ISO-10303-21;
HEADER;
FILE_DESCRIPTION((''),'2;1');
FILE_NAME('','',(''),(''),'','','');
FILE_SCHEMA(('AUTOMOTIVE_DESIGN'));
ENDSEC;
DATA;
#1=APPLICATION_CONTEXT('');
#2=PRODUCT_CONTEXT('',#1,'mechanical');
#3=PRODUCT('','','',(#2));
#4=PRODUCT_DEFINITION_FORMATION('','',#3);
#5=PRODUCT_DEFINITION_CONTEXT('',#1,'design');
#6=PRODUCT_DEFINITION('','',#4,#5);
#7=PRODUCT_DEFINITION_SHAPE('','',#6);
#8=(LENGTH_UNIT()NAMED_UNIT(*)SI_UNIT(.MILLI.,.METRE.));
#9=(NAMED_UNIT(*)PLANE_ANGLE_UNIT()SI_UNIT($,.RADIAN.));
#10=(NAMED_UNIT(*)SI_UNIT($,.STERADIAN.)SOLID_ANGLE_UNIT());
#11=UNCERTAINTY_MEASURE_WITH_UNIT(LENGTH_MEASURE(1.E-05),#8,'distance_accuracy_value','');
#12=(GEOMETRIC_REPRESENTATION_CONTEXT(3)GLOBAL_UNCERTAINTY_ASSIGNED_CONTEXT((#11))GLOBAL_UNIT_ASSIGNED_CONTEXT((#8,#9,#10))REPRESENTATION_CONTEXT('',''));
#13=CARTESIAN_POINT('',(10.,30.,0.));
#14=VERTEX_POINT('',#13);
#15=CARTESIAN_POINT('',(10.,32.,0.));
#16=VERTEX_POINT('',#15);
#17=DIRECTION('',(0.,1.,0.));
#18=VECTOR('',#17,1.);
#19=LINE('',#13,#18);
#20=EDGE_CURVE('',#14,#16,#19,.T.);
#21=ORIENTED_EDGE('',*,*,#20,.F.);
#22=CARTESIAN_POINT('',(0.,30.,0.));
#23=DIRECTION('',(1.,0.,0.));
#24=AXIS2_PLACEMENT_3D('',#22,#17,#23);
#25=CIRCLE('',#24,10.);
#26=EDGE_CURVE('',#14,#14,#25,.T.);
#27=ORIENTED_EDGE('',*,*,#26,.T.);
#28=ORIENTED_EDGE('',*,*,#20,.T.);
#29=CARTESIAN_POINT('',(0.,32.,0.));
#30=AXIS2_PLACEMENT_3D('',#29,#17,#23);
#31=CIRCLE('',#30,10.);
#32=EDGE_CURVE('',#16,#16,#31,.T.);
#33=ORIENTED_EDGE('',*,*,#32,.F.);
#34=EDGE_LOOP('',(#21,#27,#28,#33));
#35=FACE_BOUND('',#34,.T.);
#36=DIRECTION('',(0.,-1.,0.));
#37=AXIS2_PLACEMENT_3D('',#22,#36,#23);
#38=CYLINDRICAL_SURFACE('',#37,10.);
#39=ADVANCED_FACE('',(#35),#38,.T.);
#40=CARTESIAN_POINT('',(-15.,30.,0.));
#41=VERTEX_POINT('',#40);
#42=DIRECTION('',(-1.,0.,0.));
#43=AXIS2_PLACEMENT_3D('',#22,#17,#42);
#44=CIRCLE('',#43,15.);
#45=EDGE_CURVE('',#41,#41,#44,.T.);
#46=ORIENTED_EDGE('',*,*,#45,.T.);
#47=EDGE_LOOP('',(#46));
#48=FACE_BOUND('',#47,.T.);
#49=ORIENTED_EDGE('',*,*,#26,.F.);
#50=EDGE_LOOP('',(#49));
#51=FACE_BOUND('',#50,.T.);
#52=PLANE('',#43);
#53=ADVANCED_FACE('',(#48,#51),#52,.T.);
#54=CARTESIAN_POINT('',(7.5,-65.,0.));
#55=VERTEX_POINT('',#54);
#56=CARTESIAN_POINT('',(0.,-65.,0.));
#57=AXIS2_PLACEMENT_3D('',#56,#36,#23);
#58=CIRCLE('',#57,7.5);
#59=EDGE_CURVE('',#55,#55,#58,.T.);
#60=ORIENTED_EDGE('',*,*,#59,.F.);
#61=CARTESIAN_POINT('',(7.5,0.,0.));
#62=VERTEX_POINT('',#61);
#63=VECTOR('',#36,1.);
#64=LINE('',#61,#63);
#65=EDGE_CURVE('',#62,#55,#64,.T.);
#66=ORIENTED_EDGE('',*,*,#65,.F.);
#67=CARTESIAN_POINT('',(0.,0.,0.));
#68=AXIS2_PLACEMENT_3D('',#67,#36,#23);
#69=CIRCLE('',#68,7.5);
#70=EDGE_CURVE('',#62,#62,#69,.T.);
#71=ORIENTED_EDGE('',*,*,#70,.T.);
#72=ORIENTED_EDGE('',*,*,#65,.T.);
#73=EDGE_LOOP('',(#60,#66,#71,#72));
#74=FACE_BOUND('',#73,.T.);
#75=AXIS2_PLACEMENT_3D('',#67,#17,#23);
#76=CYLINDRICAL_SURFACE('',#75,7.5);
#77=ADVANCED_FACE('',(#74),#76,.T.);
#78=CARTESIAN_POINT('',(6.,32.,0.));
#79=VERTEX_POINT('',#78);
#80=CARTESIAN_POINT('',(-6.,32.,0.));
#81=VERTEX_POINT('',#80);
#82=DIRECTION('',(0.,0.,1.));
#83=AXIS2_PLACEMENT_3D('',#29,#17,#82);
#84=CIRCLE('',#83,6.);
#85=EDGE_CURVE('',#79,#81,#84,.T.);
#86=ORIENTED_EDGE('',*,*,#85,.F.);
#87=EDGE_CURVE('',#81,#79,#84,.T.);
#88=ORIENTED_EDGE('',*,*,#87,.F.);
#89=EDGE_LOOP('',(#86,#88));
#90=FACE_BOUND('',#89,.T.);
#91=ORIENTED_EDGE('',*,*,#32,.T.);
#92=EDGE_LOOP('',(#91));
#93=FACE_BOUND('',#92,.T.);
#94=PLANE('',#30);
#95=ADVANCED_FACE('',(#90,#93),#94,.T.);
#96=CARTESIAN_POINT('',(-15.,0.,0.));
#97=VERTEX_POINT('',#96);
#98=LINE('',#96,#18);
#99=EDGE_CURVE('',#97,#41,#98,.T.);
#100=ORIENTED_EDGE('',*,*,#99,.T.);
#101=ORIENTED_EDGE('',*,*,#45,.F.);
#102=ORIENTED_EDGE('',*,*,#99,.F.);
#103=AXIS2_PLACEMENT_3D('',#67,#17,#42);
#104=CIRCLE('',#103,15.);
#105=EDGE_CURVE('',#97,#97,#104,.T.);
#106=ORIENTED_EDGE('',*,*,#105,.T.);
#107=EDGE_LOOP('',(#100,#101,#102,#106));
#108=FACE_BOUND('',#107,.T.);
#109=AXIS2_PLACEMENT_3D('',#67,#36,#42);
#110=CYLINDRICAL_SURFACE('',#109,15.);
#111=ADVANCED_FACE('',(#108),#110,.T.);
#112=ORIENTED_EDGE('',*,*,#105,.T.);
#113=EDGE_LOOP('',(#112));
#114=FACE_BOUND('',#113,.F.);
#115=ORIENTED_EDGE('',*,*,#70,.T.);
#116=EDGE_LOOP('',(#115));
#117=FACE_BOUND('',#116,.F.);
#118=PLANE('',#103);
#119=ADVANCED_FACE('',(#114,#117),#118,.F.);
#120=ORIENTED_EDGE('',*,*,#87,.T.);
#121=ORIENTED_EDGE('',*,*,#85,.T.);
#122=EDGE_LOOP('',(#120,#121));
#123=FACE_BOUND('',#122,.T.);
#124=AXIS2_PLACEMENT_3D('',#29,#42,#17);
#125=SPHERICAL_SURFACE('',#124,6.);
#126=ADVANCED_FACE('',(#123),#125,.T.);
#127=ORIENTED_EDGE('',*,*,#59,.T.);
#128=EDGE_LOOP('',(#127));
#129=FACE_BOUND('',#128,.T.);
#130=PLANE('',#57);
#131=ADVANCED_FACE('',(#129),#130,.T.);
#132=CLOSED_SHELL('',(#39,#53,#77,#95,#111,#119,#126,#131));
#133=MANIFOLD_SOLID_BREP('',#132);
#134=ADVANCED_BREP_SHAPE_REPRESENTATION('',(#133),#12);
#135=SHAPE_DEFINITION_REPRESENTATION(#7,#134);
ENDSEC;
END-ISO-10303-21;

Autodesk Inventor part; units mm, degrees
ref_plane "YZ Plane" through (0, 0, 0) normal (1, 0, 0) x (0, 1, 0)
ref_plane "XZ Plane" through (0, 0, 0) normal (0, 1, 0) x (-1, 0, 0)
sketch "Boceto1" plane through (0, 0, 0) normal (0, 1, 0) x (-1, 0, 0)
  circle A0 centre (0, 0) radius 15
  dimension "d0" = 30
extrude "Extrusión1" add sketch "Boceto1" along normal blind 30
sketch "Boceto4" plane through (0, 30, 0) normal (0, 1, 0) x (1, 0, 0)
  circle A0 centre (0, 0) radius 10
  dimension "d7" = 20
extrude "Extrusión2" add sketch "Boceto4" along normal blind 2
sketch "Boceto5" plane through (0, 32, 0) normal (0, 1, 0) x (1, 0, 0)
  circle A0 centre (0, 0) radius 10 projected
  line L0 (-10, 0) -> (10, 0)
ref_plane "Plano de trabajo2" through (-10, 32, 0) normal (0, 0, 1) x (1, 0, 0)
sketch "Boceto6" plane through (-10, 32, 0) normal (0, 0, 1) x (1, 0, 0)
  line L0 (20, 0) -> (0, 0) projected
  circle A0 centre (10, 0) radius 6
  line L1 (4, 0) -> (16, 0)
  point P0 (10, -32)
  dimension "d11" = 12
revolve "Revolución2" add sketch "Boceto6" angle 360 about axis through (-6, 32, 0) along (1, 0, 0) picked at (11.497, 2.2835) contours L0 A0
sketch "Boceto7" plane through (0, 0, 0) normal (0, -1, 0) x (1, 0, 0)
  circle A0 centre (0, 0) radius 7.5
  dimension "d13" = 15
extrude "Extrusión3" add sketch "Boceto7" along normal blind 65
properties part number "Rodillo_Sostener"
